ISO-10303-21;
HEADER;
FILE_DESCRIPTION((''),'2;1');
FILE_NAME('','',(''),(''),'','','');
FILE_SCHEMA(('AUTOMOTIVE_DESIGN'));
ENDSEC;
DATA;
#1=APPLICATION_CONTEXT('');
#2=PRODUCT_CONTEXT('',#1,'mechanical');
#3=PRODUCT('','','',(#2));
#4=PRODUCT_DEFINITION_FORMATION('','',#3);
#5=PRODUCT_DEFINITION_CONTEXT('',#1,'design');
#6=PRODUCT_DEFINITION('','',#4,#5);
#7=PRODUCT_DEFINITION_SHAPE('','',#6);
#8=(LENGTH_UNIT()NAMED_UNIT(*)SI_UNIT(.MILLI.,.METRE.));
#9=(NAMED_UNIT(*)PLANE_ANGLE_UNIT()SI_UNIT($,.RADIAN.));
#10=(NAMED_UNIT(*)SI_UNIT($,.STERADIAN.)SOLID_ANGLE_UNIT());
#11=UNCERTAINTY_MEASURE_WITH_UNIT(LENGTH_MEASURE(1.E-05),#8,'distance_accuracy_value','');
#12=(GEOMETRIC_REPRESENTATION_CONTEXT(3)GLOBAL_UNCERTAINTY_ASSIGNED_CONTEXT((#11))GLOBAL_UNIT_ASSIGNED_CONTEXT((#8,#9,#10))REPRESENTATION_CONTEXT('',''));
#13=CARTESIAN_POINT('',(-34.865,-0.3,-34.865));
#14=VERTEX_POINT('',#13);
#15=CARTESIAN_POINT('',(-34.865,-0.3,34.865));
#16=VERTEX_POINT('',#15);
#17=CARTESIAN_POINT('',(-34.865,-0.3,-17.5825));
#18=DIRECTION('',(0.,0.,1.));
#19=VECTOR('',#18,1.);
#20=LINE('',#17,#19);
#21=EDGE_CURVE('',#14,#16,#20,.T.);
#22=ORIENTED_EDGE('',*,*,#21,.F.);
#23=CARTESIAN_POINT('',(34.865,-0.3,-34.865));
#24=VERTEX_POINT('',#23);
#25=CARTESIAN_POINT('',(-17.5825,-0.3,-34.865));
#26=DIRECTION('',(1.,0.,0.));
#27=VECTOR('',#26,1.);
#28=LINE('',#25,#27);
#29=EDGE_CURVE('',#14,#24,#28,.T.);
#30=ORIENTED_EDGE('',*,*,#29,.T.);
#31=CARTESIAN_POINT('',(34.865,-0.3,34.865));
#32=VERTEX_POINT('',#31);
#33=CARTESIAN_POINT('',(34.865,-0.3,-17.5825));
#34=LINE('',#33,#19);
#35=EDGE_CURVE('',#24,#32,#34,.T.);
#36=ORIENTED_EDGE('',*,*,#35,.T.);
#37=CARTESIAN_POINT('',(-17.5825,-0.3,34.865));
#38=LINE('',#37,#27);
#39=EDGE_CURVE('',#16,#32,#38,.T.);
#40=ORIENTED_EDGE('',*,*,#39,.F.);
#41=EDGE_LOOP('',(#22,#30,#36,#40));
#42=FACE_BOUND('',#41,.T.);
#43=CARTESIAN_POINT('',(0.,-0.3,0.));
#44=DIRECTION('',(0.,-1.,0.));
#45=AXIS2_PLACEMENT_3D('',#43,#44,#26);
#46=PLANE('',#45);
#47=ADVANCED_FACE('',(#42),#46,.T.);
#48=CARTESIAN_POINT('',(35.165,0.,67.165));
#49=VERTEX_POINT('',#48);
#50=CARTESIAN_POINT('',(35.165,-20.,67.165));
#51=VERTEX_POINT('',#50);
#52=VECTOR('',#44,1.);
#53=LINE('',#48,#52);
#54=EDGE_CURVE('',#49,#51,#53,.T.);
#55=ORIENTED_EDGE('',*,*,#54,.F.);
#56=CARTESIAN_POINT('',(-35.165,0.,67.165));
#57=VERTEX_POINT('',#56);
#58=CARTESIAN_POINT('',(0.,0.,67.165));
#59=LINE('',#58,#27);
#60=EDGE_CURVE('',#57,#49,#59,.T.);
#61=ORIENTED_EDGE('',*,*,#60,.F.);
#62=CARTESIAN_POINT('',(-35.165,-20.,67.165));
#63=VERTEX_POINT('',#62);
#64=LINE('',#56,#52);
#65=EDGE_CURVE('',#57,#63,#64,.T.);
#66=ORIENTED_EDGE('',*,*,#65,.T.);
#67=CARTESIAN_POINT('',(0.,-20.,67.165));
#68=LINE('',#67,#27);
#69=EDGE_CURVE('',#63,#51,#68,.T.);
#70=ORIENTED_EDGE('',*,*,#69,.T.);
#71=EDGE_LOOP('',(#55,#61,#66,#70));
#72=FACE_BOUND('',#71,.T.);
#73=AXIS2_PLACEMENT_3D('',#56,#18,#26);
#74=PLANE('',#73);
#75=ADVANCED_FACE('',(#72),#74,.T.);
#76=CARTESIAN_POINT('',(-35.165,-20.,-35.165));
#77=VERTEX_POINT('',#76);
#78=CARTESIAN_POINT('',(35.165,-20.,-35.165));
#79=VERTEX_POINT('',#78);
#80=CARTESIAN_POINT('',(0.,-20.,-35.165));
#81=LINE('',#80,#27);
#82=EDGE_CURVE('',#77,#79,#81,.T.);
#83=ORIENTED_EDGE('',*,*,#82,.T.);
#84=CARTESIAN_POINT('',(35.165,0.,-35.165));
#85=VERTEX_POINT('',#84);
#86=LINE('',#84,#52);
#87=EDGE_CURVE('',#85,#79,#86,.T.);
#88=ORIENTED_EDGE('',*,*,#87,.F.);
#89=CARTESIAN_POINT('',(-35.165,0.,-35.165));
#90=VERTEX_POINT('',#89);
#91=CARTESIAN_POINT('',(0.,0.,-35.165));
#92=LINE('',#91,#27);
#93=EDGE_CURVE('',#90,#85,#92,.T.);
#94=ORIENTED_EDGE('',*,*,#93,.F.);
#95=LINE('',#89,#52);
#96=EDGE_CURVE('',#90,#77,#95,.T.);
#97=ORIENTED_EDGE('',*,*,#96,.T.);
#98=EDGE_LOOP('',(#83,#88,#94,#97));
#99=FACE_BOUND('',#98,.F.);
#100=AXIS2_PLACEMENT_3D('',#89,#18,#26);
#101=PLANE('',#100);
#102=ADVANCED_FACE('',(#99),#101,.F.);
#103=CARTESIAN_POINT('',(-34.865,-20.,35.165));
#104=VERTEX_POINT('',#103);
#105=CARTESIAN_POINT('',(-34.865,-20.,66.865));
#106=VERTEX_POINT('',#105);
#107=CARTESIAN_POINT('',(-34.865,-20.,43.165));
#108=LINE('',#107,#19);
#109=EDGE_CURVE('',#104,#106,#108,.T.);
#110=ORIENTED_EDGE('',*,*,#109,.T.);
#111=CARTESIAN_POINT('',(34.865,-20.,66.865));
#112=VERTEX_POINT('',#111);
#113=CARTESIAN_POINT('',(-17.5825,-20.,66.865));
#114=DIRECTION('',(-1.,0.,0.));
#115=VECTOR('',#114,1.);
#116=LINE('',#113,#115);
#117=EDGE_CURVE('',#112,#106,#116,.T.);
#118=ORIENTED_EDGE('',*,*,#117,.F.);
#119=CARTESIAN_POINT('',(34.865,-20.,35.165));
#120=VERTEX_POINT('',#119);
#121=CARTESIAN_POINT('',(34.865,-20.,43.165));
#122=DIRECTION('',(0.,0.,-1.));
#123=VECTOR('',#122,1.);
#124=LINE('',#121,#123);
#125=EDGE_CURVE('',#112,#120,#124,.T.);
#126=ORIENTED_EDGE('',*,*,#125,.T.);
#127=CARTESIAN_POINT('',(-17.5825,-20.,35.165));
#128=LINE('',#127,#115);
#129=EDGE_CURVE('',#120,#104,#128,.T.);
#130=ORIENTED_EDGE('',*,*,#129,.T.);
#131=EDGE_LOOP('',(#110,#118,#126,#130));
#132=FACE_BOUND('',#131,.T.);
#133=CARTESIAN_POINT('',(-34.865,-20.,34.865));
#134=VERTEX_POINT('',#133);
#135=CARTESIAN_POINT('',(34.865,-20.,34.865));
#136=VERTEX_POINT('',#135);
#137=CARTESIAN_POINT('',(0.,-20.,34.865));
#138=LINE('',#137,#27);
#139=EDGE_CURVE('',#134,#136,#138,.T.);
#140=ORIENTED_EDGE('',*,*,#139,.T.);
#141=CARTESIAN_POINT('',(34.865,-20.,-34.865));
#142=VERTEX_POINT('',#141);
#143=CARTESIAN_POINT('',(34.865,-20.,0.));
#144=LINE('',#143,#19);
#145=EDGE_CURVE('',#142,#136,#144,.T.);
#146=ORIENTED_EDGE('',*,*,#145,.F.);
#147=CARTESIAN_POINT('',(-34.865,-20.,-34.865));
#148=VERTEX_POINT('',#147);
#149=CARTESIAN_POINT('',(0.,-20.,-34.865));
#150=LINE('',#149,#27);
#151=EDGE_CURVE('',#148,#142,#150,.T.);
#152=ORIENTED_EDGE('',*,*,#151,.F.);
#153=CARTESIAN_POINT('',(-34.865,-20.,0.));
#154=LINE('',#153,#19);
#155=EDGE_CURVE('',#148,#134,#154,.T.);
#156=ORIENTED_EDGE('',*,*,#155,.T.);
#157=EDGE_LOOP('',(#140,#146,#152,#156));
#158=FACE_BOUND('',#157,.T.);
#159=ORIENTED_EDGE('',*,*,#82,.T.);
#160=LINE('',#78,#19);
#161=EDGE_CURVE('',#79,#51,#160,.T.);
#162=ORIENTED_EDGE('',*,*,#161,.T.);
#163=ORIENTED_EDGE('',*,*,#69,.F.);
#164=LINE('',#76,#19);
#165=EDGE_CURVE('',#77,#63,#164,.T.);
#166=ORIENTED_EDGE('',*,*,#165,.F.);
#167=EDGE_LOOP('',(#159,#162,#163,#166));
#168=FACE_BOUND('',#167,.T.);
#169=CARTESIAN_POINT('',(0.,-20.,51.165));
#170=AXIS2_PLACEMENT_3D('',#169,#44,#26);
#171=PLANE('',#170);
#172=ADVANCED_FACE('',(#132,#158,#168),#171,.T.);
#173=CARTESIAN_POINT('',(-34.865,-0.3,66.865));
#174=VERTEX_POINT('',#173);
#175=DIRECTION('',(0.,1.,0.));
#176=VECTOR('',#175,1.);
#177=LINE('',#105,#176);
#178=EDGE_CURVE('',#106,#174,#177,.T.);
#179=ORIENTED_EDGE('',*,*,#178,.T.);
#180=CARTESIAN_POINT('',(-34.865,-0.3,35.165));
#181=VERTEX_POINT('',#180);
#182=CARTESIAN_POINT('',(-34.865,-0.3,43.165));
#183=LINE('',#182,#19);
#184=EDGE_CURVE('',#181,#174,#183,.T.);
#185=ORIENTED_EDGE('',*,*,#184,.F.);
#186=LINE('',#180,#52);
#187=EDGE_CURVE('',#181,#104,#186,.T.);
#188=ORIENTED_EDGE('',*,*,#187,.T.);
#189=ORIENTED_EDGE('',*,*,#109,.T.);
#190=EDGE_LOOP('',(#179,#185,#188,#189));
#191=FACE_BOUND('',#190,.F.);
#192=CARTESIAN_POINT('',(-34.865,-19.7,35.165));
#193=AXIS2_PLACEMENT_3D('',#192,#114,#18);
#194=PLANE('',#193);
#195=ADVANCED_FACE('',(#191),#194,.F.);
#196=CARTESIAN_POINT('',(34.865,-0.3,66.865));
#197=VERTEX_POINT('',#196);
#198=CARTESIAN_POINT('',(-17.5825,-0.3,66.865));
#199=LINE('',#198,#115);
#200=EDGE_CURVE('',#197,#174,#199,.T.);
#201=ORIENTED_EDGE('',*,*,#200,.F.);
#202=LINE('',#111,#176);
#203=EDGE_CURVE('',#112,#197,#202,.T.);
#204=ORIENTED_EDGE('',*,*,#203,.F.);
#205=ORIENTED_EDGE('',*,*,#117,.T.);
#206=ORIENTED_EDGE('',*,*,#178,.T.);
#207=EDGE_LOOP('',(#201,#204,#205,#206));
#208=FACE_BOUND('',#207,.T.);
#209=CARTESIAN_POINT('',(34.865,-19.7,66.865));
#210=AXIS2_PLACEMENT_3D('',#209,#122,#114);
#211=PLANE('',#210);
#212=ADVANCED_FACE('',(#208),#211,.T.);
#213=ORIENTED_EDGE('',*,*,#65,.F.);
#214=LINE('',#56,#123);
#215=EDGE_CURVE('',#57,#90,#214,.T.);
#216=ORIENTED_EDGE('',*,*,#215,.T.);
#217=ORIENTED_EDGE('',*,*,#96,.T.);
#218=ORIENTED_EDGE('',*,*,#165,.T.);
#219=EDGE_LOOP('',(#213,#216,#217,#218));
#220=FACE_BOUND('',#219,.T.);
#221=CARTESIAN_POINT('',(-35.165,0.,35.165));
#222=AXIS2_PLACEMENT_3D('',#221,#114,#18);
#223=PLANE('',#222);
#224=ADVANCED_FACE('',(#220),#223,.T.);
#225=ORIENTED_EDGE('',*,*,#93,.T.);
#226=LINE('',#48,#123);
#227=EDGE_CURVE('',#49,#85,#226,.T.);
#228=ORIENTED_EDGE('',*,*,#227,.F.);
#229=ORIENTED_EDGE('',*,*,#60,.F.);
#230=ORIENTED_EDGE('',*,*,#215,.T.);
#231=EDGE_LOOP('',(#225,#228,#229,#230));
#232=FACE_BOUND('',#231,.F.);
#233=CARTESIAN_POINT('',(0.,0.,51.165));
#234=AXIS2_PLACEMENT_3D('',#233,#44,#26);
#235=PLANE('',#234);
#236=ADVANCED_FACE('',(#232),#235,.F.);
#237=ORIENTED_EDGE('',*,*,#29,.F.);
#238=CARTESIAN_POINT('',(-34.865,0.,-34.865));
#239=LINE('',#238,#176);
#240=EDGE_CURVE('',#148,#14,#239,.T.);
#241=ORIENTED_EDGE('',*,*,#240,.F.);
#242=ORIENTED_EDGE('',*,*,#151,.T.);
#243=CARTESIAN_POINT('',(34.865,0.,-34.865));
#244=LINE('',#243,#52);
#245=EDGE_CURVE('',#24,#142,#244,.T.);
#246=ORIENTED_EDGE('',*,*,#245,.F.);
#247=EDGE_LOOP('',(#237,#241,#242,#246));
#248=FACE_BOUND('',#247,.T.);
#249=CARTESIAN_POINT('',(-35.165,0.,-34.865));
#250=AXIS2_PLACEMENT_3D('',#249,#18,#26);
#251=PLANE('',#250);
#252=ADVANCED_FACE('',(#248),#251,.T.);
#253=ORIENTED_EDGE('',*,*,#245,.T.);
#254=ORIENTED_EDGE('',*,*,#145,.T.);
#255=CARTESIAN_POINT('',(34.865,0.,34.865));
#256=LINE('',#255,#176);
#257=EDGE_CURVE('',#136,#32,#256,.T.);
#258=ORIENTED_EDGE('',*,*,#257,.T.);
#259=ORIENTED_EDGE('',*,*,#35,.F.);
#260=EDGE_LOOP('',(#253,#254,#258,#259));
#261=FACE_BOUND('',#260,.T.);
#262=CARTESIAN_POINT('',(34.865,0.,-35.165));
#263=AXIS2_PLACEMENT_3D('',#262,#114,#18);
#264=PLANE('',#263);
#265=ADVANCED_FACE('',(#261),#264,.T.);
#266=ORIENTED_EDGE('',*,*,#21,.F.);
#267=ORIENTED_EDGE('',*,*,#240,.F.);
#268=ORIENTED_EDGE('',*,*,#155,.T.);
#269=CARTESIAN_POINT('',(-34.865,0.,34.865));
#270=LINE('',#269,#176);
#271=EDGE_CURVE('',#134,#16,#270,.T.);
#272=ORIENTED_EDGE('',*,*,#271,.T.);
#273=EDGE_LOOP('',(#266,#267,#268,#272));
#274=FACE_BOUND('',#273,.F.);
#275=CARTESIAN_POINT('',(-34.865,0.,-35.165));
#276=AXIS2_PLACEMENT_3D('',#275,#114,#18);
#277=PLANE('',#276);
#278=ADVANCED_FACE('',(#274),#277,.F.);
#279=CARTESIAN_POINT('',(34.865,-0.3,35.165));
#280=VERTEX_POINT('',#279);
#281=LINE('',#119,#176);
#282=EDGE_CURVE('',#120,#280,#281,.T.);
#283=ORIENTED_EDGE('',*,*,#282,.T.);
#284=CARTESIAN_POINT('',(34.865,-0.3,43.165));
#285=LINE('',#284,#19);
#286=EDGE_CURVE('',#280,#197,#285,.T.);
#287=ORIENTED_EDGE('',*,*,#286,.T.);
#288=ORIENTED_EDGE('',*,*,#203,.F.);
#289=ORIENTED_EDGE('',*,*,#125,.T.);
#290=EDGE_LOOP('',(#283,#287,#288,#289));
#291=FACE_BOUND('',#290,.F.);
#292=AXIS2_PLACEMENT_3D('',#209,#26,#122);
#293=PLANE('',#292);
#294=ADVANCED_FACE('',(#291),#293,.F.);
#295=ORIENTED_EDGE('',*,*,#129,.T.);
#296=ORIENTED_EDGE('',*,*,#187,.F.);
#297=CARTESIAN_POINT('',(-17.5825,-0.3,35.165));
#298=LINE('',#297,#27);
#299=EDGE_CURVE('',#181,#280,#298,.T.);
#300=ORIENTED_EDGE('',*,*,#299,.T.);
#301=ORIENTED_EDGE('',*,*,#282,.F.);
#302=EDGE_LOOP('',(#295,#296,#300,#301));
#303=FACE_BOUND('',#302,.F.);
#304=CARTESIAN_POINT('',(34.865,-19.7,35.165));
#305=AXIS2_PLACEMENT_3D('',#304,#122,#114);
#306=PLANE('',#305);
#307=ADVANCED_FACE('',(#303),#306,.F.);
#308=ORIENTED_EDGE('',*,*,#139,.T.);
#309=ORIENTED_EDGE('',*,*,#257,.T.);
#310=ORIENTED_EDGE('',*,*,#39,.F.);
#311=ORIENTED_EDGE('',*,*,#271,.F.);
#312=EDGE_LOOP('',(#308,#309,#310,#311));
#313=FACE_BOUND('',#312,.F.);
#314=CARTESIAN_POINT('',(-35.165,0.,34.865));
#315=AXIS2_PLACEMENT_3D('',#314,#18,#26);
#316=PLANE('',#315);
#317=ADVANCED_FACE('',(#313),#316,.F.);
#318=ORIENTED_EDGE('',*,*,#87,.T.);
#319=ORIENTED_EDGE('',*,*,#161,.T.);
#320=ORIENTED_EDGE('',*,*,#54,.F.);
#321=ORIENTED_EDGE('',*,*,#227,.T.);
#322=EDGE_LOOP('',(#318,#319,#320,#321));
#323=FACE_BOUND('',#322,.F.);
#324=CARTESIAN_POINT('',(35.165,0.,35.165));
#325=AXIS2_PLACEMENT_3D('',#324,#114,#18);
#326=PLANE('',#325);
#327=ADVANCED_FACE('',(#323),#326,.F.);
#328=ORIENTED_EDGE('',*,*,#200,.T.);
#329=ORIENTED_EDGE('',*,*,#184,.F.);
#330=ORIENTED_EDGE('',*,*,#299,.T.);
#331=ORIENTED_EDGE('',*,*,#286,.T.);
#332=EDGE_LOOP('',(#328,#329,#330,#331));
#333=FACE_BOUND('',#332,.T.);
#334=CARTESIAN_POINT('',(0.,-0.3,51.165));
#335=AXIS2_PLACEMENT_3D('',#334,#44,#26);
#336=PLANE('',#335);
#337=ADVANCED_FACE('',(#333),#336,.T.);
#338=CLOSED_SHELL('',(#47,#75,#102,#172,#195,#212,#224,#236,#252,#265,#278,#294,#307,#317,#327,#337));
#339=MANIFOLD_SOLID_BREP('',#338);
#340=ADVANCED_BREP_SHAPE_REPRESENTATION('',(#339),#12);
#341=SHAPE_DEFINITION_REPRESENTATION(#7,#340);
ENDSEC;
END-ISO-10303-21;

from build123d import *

# Parameters (mm, degrees)
F0_W     = 70.33
F0_H     = 70.33
F1_DEPTH = 20
F2_T     = -0.3
F0_H_2   = 32
F3_DEPTH = 20
F4_T     = -0.3


# Not quite as in the source:
# - a shell that OpenCascade refuses in one call is made with other operations: the cavity is built on its own and cut out


with BuildPart() as f1:
    # F0 (on Front) → F1 (new body)
    with BuildSketch(Plane.XZ):
        Rectangle(F0_W, F0_H)
    extrude(amount=F1_DEPTH)

    # F2
    f2_openings = [f1.faces().sort_by_distance(p)[0] for p in [
        (0, -20, 0),
    ]]
    offset(amount=F2_T, openings=f2_openings)

    # F0 (on Front) → F3 (join)
    with BuildSketch(Plane.XZ):
        with Locations((0, 51.165)):
            Rectangle(F0_W, F0_H_2)
    extrude(amount=F3_DEPTH)

    # F4: a shell. OpenCascade refuses it in one call, so the cavity is built on its own and cut out:
    # the body offset inwards by the wall thickness, plus a prism from it out through each open face.
    f4_core = offset(f1.part, amount=F4_T, kind=Kind.INTERSECTION, mode=Mode.PRIVATE)
    f4_exits = [f4_core.faces().sort_by_distance(p)[0] for p in [
        (0, -19.7, 51.015),
    ]]
    add(f4_core, mode=Mode.SUBTRACT)
    extrude(f4_exits, amount=-F4_T, mode=Mode.SUBTRACT)


solid = f1.part
